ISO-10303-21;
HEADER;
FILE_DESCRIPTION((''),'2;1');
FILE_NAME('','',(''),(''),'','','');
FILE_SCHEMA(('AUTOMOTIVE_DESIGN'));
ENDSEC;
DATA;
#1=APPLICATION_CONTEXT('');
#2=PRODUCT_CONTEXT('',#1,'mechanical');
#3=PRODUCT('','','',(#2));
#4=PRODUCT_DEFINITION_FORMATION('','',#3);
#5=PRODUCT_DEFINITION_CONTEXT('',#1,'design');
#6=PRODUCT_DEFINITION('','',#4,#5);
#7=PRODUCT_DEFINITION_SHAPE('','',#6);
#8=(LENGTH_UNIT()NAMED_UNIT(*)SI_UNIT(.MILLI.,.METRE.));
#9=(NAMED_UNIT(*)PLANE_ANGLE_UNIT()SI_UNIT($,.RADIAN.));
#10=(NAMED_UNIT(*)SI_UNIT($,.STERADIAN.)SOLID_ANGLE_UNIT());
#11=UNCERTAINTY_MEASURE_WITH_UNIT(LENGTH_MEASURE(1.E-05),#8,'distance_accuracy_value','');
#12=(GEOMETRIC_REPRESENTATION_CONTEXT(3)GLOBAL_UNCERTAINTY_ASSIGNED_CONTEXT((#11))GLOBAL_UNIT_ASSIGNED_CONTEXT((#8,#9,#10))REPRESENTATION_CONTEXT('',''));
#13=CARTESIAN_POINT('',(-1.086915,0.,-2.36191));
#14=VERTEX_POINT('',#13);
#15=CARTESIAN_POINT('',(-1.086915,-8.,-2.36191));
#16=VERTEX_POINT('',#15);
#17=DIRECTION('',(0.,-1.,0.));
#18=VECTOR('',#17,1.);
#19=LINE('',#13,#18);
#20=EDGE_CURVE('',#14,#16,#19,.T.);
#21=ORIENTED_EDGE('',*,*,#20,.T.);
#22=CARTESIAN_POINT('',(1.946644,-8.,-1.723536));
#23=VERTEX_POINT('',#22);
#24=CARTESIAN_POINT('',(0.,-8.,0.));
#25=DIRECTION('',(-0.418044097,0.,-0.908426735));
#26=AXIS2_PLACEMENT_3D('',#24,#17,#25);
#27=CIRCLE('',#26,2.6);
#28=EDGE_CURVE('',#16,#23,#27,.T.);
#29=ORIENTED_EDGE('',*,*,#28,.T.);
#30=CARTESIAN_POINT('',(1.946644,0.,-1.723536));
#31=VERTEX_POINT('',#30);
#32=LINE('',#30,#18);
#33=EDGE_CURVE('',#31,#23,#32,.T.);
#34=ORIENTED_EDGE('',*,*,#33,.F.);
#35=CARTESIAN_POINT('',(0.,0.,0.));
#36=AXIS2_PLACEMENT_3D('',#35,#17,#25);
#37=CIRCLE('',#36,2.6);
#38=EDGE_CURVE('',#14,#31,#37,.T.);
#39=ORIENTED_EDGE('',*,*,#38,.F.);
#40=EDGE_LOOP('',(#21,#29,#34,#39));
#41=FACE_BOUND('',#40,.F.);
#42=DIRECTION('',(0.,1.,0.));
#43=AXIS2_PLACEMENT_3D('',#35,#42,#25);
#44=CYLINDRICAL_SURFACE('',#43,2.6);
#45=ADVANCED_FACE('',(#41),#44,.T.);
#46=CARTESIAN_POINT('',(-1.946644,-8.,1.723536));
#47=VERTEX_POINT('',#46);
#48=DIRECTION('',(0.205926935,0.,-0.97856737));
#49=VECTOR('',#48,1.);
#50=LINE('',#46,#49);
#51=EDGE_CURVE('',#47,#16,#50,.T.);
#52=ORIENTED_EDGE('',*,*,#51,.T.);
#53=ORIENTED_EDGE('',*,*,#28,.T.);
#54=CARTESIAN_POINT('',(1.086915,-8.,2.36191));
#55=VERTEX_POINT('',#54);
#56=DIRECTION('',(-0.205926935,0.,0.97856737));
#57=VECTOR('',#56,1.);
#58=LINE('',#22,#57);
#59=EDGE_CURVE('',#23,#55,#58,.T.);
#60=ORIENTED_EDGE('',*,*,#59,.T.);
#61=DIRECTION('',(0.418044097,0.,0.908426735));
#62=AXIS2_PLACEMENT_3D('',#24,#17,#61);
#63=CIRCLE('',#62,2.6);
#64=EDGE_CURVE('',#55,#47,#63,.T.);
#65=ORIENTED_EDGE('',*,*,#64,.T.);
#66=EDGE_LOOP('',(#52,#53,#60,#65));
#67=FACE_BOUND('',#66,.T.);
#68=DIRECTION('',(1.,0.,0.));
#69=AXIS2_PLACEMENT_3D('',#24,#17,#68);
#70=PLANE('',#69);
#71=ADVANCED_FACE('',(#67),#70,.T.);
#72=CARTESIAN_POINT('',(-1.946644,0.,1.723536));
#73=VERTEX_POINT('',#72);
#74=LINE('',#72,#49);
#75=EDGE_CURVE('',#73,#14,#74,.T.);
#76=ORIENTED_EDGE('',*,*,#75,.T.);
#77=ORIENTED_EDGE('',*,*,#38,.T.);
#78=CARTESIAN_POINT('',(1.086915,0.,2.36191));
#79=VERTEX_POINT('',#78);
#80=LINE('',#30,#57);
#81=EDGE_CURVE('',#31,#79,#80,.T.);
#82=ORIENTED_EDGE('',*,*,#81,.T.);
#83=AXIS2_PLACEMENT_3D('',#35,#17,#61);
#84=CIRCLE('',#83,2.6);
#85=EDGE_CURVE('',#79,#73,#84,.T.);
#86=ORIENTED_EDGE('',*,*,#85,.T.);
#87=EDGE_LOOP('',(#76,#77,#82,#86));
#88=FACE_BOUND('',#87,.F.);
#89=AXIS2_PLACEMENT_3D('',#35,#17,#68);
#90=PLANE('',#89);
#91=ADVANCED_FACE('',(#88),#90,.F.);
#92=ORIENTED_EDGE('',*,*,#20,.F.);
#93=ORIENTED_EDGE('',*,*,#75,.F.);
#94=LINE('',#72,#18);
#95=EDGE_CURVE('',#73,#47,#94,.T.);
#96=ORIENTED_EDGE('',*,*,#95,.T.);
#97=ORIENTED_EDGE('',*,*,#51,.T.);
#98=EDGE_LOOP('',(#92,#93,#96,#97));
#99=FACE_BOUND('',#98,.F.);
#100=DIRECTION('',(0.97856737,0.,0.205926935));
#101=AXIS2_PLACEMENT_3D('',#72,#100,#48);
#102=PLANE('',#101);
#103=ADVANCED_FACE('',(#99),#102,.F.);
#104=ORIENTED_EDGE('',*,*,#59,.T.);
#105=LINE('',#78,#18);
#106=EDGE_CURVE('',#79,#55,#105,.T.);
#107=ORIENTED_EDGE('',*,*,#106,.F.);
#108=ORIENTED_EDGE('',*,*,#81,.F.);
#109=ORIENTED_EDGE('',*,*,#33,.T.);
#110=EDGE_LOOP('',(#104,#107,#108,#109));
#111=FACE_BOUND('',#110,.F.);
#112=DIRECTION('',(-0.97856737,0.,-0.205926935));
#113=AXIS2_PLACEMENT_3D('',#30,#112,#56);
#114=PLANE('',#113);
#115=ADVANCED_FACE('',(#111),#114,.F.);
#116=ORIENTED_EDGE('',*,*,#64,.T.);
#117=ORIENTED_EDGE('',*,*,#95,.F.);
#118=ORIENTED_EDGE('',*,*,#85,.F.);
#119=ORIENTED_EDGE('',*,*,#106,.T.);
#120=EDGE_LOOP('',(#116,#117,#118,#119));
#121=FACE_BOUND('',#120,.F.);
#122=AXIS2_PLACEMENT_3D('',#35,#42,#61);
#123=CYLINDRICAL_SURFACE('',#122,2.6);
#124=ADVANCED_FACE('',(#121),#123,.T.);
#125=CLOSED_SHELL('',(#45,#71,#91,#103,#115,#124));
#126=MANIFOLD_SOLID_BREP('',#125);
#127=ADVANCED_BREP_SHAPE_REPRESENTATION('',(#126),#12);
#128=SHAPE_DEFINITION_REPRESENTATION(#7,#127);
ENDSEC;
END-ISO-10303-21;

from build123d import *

# Parameters (mm, degrees)
F2_DEPTH = 8


# Not quite as in the source:
# - the program builds the solid bodies; features that only make, move or delete a surface that nothing else refers to are left out


with BuildPart() as f2:
    # F0 (on Front) → F2 (new body)
    with BuildSketch(Plane.XZ):
        with BuildLine():
            Line((1.9466441938, -1.7235360115), (1.0869146527, 2.3619095109))
            ThreePointArc((1.0869146527, 2.3619095109), (-0.5354100318, 2.5442751616), (-1.9466441938, 1.7235360115))
            Line((-1.9466441938, 1.7235360115), (-1.0869146527, -2.3619095109))
            ThreePointArc((-1.0869146527, -2.3619095109), (0.5354100318, -2.5442751616), (1.9466441938, -1.7235360115))
        make_face()
    extrude(amount=F2_DEPTH)


solid = f2.part
